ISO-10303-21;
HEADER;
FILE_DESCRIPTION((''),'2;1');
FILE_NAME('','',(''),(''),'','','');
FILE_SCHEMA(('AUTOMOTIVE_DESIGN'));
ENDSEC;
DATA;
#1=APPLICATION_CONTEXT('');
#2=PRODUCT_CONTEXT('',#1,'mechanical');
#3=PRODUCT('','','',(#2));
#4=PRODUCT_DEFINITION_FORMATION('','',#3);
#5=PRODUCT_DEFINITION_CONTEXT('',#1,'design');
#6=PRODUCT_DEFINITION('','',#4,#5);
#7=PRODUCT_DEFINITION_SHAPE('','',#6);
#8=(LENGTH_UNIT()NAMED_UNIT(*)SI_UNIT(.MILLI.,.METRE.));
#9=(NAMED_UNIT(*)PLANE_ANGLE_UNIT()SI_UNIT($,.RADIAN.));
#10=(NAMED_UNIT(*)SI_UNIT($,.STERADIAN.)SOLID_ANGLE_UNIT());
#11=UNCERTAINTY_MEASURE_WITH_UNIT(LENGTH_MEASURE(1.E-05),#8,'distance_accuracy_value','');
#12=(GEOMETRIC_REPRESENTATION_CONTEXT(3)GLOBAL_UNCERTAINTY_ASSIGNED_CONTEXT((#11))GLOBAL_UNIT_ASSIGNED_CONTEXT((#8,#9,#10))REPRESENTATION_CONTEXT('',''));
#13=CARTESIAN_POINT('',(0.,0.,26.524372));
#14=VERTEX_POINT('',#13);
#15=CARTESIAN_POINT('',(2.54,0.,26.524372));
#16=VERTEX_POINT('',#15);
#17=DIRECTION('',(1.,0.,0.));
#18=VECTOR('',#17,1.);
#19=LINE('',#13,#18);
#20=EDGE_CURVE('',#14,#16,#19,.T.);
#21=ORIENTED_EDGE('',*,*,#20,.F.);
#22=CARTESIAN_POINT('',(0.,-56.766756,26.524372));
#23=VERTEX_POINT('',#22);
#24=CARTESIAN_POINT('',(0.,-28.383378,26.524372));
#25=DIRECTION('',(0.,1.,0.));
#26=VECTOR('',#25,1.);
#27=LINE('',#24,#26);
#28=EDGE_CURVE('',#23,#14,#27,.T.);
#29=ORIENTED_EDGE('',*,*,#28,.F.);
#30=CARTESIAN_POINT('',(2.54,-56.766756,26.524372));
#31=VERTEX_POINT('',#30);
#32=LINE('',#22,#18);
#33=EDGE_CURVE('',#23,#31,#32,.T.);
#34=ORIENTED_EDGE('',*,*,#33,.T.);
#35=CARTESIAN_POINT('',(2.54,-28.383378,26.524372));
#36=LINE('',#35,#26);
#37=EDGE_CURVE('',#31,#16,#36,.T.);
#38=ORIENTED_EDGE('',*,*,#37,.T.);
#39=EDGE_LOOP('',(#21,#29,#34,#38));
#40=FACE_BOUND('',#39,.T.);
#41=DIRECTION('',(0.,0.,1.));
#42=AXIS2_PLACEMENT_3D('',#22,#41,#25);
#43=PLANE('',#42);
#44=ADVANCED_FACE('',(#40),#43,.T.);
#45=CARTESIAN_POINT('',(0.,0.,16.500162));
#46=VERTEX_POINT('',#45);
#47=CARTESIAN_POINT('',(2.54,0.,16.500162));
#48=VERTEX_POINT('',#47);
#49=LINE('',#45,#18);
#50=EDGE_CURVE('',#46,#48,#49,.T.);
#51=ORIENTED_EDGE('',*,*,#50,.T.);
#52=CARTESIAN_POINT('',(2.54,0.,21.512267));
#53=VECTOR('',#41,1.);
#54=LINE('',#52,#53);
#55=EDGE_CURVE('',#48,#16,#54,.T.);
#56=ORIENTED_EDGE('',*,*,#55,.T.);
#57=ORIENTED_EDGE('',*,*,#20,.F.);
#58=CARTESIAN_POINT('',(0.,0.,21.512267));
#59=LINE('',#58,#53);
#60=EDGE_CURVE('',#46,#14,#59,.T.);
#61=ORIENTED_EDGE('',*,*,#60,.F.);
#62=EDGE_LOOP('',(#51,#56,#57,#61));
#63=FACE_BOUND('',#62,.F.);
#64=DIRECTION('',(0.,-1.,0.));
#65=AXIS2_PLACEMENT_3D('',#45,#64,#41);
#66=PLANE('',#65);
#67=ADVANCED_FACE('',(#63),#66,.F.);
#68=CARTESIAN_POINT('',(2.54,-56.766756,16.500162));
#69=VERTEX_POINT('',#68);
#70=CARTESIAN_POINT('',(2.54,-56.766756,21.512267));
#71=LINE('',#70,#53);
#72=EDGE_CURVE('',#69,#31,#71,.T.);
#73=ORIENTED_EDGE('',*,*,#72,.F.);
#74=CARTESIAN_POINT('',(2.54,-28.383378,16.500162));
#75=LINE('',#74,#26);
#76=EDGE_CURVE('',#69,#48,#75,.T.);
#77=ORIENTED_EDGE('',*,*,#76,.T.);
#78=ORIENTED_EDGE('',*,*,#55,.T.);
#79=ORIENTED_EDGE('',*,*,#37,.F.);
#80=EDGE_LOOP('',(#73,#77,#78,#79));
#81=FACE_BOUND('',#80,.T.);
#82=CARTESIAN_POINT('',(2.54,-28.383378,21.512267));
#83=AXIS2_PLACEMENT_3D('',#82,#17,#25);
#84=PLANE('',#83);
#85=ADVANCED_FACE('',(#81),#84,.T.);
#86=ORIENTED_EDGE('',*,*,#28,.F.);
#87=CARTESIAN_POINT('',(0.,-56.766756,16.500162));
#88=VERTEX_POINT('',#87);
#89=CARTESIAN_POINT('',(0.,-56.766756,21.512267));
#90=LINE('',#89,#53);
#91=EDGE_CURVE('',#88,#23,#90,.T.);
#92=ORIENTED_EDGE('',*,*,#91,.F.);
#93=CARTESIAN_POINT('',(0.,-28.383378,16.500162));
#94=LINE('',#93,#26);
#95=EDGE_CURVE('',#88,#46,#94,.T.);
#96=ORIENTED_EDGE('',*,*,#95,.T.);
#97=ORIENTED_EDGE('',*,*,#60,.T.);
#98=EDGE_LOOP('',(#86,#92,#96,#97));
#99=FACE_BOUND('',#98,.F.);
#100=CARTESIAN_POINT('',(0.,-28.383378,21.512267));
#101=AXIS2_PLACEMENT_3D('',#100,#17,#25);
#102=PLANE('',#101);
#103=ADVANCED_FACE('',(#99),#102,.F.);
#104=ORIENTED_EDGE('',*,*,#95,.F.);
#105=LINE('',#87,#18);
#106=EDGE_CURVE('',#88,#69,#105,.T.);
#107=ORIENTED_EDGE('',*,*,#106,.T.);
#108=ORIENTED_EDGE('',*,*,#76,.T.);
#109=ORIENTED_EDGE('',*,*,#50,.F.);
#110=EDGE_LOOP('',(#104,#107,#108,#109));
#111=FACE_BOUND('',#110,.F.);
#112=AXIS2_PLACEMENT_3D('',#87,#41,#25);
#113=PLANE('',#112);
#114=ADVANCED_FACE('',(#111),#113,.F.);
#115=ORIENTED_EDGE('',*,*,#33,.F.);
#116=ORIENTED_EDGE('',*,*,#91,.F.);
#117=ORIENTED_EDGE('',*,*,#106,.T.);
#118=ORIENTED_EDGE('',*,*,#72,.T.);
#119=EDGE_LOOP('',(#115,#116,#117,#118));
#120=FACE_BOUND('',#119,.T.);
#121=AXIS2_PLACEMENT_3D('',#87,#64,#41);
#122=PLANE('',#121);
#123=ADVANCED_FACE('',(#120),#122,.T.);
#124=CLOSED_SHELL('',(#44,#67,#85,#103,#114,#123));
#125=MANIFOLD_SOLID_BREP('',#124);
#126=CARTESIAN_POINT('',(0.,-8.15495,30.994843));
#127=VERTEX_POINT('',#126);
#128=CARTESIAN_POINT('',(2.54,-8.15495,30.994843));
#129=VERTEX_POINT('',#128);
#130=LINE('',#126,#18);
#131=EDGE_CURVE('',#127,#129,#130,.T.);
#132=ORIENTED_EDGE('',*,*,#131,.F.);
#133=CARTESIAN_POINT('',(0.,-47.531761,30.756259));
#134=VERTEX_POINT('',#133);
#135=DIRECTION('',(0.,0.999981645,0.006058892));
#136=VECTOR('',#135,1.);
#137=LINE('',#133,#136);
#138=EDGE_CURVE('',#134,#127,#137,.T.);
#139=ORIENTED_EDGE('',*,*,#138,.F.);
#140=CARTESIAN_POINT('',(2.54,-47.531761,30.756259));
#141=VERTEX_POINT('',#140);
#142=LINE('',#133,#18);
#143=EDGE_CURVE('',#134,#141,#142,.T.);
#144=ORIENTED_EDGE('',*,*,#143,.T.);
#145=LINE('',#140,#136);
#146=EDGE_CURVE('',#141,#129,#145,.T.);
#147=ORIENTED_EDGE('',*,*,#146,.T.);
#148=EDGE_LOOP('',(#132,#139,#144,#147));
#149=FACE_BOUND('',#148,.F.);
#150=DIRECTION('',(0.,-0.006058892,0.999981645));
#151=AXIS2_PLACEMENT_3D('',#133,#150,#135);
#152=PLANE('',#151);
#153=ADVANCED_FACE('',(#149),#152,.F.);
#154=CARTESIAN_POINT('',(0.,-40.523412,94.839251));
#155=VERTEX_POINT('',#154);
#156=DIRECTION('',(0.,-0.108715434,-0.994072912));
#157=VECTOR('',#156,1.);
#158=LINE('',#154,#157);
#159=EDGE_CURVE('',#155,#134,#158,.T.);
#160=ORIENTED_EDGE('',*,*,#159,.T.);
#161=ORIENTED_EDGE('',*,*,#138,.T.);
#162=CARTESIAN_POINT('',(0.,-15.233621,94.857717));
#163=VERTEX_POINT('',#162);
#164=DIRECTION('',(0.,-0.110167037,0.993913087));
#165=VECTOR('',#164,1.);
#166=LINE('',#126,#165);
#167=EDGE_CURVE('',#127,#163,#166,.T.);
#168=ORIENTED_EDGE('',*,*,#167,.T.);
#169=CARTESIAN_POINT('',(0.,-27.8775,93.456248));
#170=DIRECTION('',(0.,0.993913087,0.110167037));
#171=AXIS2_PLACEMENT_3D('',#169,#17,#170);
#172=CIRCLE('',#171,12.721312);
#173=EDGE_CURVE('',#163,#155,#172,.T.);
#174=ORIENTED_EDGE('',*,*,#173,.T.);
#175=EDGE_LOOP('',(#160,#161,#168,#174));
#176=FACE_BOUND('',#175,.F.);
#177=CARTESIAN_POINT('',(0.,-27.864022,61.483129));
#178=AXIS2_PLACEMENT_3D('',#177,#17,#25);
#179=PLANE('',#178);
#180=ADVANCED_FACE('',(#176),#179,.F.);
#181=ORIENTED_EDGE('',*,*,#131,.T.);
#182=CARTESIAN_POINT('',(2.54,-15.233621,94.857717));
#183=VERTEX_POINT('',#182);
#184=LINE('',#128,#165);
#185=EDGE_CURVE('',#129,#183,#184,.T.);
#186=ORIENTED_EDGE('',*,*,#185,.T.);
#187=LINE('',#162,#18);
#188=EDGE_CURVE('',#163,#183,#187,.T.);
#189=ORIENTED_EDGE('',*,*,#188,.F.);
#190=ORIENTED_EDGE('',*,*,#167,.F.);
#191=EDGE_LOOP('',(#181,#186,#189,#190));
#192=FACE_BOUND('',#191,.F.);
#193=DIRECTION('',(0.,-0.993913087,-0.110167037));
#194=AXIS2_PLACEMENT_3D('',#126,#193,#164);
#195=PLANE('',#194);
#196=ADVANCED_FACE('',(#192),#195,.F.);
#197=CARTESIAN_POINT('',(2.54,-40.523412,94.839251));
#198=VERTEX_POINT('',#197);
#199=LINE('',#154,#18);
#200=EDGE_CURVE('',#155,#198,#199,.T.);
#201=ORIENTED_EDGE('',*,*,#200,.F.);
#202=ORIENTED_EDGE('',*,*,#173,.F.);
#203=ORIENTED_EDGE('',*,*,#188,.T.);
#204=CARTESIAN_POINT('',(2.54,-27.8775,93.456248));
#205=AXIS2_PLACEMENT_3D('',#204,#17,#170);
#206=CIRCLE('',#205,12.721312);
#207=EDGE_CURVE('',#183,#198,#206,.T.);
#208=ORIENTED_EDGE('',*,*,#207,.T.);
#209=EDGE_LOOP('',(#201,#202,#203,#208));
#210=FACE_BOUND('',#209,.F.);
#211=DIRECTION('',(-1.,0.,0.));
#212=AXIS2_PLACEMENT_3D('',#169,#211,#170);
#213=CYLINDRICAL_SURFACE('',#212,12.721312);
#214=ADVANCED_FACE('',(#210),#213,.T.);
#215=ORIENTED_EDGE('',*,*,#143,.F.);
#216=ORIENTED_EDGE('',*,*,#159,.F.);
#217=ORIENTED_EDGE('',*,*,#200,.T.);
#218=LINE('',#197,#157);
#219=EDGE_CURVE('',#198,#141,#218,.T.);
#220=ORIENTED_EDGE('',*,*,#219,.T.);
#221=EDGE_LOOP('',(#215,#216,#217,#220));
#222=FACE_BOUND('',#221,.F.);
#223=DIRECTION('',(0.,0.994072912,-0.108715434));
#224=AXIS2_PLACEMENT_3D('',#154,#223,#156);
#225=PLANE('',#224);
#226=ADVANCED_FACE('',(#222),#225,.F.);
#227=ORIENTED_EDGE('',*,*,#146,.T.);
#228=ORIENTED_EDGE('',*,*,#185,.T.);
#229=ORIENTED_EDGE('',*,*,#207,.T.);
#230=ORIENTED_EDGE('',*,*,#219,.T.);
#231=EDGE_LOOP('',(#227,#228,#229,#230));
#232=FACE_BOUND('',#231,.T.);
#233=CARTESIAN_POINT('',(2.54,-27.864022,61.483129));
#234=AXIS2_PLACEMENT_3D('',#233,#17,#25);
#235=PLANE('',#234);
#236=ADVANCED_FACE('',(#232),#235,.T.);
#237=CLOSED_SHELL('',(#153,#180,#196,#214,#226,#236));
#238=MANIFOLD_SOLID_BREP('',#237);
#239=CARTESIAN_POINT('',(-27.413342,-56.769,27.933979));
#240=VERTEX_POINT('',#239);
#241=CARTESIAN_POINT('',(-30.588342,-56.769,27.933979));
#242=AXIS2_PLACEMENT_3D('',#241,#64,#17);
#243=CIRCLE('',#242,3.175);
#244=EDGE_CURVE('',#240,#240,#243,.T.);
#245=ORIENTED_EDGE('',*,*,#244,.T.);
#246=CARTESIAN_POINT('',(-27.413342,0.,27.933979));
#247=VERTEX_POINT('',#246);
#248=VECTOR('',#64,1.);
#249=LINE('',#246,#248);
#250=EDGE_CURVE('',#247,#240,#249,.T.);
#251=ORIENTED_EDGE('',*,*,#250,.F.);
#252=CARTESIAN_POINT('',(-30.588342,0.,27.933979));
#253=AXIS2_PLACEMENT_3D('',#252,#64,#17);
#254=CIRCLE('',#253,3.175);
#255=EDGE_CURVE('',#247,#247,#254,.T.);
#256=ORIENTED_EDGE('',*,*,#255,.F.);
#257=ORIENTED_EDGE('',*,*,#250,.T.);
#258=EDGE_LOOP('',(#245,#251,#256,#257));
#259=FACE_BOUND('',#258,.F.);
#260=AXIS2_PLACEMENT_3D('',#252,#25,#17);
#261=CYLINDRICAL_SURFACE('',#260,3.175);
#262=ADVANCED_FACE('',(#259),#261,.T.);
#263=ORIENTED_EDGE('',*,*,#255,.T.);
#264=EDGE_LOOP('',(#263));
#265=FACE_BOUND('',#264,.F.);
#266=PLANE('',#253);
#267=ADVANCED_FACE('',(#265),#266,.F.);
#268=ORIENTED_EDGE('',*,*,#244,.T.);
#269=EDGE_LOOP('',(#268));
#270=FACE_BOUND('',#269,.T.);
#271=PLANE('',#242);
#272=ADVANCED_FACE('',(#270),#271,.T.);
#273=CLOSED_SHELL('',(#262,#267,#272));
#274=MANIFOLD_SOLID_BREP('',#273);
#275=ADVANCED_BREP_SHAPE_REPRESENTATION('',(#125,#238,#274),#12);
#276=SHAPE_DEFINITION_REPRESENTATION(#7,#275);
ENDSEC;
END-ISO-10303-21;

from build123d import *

# Parameters (mm, degrees)
F0_R     = 3.175
F1_DEPTH = 56.769
F2_W     = 56.7667558789
F2_H     = 10.0242104381
F3_DEPTH = 2.54
F5_DEPTH = 2.54


# Not quite as in the source:
# - a feature names something its author has since deleted; it is built from what else it names


with BuildPart() as f1:
    # F0 (on Front) → F1 (new body)
    with BuildSketch(Plane.XZ):
        with Locations((-30.5883418769, 27.933979407)):
            Circle(F0_R)
    extrude(amount=F1_DEPTH)


with BuildPart() as f3:
    # F2 (on Right) → F3 (new body)
    with BuildSketch(Plane.YZ):
        with Locations((-28.3833779395, 21.5122671798)):
            Rectangle(F2_W, F2_H)
    extrude(amount=F3_DEPTH)


with BuildPart() as f5:
    # F4 (on Right) → F5 (new body)
    with BuildSketch(Plane.YZ):
        with BuildLine():
            ThreePointArc((-15.2336207801, 94.8577174533), (-15.1755603882, 94.1580515789), (-15.1561872556, 93.4562481686))
            ThreePointArc((-15.1561872556, 93.4562481686), (-28.570028053, 80.7537998705), (-40.5234116559, 94.8392511643))
            Line((-40.5234116559, 94.8392511643), (-47.5317611003, 30.7562586925))
            Line((-47.5317611003, 30.7562586925), (-8.1549498937, 30.9948429335))
            Line((-8.1549498937, 30.9948429335), (-15.2336207801, 94.8577174533))
        make_face()
        with BuildLine():
            ThreePointArc((-40.5234116559, 94.8392511643), (-28.570028053, 80.7537998705), (-15.1561872556, 93.4562481686))
            ThreePointArc((-15.1561872556, 93.4562481686), (-15.1755603882, 94.1580515789), (-15.2336207801, 94.8577174533))
            ThreePointArc((-15.2336207801, 94.8577174533), (-27.8867885653, 106.1775571463), (-40.5234116559, 94.8392511643))
        make_face()
    extrude(amount=F5_DEPTH)


solid = Compound([f1.part, f3.part, f5.part])
